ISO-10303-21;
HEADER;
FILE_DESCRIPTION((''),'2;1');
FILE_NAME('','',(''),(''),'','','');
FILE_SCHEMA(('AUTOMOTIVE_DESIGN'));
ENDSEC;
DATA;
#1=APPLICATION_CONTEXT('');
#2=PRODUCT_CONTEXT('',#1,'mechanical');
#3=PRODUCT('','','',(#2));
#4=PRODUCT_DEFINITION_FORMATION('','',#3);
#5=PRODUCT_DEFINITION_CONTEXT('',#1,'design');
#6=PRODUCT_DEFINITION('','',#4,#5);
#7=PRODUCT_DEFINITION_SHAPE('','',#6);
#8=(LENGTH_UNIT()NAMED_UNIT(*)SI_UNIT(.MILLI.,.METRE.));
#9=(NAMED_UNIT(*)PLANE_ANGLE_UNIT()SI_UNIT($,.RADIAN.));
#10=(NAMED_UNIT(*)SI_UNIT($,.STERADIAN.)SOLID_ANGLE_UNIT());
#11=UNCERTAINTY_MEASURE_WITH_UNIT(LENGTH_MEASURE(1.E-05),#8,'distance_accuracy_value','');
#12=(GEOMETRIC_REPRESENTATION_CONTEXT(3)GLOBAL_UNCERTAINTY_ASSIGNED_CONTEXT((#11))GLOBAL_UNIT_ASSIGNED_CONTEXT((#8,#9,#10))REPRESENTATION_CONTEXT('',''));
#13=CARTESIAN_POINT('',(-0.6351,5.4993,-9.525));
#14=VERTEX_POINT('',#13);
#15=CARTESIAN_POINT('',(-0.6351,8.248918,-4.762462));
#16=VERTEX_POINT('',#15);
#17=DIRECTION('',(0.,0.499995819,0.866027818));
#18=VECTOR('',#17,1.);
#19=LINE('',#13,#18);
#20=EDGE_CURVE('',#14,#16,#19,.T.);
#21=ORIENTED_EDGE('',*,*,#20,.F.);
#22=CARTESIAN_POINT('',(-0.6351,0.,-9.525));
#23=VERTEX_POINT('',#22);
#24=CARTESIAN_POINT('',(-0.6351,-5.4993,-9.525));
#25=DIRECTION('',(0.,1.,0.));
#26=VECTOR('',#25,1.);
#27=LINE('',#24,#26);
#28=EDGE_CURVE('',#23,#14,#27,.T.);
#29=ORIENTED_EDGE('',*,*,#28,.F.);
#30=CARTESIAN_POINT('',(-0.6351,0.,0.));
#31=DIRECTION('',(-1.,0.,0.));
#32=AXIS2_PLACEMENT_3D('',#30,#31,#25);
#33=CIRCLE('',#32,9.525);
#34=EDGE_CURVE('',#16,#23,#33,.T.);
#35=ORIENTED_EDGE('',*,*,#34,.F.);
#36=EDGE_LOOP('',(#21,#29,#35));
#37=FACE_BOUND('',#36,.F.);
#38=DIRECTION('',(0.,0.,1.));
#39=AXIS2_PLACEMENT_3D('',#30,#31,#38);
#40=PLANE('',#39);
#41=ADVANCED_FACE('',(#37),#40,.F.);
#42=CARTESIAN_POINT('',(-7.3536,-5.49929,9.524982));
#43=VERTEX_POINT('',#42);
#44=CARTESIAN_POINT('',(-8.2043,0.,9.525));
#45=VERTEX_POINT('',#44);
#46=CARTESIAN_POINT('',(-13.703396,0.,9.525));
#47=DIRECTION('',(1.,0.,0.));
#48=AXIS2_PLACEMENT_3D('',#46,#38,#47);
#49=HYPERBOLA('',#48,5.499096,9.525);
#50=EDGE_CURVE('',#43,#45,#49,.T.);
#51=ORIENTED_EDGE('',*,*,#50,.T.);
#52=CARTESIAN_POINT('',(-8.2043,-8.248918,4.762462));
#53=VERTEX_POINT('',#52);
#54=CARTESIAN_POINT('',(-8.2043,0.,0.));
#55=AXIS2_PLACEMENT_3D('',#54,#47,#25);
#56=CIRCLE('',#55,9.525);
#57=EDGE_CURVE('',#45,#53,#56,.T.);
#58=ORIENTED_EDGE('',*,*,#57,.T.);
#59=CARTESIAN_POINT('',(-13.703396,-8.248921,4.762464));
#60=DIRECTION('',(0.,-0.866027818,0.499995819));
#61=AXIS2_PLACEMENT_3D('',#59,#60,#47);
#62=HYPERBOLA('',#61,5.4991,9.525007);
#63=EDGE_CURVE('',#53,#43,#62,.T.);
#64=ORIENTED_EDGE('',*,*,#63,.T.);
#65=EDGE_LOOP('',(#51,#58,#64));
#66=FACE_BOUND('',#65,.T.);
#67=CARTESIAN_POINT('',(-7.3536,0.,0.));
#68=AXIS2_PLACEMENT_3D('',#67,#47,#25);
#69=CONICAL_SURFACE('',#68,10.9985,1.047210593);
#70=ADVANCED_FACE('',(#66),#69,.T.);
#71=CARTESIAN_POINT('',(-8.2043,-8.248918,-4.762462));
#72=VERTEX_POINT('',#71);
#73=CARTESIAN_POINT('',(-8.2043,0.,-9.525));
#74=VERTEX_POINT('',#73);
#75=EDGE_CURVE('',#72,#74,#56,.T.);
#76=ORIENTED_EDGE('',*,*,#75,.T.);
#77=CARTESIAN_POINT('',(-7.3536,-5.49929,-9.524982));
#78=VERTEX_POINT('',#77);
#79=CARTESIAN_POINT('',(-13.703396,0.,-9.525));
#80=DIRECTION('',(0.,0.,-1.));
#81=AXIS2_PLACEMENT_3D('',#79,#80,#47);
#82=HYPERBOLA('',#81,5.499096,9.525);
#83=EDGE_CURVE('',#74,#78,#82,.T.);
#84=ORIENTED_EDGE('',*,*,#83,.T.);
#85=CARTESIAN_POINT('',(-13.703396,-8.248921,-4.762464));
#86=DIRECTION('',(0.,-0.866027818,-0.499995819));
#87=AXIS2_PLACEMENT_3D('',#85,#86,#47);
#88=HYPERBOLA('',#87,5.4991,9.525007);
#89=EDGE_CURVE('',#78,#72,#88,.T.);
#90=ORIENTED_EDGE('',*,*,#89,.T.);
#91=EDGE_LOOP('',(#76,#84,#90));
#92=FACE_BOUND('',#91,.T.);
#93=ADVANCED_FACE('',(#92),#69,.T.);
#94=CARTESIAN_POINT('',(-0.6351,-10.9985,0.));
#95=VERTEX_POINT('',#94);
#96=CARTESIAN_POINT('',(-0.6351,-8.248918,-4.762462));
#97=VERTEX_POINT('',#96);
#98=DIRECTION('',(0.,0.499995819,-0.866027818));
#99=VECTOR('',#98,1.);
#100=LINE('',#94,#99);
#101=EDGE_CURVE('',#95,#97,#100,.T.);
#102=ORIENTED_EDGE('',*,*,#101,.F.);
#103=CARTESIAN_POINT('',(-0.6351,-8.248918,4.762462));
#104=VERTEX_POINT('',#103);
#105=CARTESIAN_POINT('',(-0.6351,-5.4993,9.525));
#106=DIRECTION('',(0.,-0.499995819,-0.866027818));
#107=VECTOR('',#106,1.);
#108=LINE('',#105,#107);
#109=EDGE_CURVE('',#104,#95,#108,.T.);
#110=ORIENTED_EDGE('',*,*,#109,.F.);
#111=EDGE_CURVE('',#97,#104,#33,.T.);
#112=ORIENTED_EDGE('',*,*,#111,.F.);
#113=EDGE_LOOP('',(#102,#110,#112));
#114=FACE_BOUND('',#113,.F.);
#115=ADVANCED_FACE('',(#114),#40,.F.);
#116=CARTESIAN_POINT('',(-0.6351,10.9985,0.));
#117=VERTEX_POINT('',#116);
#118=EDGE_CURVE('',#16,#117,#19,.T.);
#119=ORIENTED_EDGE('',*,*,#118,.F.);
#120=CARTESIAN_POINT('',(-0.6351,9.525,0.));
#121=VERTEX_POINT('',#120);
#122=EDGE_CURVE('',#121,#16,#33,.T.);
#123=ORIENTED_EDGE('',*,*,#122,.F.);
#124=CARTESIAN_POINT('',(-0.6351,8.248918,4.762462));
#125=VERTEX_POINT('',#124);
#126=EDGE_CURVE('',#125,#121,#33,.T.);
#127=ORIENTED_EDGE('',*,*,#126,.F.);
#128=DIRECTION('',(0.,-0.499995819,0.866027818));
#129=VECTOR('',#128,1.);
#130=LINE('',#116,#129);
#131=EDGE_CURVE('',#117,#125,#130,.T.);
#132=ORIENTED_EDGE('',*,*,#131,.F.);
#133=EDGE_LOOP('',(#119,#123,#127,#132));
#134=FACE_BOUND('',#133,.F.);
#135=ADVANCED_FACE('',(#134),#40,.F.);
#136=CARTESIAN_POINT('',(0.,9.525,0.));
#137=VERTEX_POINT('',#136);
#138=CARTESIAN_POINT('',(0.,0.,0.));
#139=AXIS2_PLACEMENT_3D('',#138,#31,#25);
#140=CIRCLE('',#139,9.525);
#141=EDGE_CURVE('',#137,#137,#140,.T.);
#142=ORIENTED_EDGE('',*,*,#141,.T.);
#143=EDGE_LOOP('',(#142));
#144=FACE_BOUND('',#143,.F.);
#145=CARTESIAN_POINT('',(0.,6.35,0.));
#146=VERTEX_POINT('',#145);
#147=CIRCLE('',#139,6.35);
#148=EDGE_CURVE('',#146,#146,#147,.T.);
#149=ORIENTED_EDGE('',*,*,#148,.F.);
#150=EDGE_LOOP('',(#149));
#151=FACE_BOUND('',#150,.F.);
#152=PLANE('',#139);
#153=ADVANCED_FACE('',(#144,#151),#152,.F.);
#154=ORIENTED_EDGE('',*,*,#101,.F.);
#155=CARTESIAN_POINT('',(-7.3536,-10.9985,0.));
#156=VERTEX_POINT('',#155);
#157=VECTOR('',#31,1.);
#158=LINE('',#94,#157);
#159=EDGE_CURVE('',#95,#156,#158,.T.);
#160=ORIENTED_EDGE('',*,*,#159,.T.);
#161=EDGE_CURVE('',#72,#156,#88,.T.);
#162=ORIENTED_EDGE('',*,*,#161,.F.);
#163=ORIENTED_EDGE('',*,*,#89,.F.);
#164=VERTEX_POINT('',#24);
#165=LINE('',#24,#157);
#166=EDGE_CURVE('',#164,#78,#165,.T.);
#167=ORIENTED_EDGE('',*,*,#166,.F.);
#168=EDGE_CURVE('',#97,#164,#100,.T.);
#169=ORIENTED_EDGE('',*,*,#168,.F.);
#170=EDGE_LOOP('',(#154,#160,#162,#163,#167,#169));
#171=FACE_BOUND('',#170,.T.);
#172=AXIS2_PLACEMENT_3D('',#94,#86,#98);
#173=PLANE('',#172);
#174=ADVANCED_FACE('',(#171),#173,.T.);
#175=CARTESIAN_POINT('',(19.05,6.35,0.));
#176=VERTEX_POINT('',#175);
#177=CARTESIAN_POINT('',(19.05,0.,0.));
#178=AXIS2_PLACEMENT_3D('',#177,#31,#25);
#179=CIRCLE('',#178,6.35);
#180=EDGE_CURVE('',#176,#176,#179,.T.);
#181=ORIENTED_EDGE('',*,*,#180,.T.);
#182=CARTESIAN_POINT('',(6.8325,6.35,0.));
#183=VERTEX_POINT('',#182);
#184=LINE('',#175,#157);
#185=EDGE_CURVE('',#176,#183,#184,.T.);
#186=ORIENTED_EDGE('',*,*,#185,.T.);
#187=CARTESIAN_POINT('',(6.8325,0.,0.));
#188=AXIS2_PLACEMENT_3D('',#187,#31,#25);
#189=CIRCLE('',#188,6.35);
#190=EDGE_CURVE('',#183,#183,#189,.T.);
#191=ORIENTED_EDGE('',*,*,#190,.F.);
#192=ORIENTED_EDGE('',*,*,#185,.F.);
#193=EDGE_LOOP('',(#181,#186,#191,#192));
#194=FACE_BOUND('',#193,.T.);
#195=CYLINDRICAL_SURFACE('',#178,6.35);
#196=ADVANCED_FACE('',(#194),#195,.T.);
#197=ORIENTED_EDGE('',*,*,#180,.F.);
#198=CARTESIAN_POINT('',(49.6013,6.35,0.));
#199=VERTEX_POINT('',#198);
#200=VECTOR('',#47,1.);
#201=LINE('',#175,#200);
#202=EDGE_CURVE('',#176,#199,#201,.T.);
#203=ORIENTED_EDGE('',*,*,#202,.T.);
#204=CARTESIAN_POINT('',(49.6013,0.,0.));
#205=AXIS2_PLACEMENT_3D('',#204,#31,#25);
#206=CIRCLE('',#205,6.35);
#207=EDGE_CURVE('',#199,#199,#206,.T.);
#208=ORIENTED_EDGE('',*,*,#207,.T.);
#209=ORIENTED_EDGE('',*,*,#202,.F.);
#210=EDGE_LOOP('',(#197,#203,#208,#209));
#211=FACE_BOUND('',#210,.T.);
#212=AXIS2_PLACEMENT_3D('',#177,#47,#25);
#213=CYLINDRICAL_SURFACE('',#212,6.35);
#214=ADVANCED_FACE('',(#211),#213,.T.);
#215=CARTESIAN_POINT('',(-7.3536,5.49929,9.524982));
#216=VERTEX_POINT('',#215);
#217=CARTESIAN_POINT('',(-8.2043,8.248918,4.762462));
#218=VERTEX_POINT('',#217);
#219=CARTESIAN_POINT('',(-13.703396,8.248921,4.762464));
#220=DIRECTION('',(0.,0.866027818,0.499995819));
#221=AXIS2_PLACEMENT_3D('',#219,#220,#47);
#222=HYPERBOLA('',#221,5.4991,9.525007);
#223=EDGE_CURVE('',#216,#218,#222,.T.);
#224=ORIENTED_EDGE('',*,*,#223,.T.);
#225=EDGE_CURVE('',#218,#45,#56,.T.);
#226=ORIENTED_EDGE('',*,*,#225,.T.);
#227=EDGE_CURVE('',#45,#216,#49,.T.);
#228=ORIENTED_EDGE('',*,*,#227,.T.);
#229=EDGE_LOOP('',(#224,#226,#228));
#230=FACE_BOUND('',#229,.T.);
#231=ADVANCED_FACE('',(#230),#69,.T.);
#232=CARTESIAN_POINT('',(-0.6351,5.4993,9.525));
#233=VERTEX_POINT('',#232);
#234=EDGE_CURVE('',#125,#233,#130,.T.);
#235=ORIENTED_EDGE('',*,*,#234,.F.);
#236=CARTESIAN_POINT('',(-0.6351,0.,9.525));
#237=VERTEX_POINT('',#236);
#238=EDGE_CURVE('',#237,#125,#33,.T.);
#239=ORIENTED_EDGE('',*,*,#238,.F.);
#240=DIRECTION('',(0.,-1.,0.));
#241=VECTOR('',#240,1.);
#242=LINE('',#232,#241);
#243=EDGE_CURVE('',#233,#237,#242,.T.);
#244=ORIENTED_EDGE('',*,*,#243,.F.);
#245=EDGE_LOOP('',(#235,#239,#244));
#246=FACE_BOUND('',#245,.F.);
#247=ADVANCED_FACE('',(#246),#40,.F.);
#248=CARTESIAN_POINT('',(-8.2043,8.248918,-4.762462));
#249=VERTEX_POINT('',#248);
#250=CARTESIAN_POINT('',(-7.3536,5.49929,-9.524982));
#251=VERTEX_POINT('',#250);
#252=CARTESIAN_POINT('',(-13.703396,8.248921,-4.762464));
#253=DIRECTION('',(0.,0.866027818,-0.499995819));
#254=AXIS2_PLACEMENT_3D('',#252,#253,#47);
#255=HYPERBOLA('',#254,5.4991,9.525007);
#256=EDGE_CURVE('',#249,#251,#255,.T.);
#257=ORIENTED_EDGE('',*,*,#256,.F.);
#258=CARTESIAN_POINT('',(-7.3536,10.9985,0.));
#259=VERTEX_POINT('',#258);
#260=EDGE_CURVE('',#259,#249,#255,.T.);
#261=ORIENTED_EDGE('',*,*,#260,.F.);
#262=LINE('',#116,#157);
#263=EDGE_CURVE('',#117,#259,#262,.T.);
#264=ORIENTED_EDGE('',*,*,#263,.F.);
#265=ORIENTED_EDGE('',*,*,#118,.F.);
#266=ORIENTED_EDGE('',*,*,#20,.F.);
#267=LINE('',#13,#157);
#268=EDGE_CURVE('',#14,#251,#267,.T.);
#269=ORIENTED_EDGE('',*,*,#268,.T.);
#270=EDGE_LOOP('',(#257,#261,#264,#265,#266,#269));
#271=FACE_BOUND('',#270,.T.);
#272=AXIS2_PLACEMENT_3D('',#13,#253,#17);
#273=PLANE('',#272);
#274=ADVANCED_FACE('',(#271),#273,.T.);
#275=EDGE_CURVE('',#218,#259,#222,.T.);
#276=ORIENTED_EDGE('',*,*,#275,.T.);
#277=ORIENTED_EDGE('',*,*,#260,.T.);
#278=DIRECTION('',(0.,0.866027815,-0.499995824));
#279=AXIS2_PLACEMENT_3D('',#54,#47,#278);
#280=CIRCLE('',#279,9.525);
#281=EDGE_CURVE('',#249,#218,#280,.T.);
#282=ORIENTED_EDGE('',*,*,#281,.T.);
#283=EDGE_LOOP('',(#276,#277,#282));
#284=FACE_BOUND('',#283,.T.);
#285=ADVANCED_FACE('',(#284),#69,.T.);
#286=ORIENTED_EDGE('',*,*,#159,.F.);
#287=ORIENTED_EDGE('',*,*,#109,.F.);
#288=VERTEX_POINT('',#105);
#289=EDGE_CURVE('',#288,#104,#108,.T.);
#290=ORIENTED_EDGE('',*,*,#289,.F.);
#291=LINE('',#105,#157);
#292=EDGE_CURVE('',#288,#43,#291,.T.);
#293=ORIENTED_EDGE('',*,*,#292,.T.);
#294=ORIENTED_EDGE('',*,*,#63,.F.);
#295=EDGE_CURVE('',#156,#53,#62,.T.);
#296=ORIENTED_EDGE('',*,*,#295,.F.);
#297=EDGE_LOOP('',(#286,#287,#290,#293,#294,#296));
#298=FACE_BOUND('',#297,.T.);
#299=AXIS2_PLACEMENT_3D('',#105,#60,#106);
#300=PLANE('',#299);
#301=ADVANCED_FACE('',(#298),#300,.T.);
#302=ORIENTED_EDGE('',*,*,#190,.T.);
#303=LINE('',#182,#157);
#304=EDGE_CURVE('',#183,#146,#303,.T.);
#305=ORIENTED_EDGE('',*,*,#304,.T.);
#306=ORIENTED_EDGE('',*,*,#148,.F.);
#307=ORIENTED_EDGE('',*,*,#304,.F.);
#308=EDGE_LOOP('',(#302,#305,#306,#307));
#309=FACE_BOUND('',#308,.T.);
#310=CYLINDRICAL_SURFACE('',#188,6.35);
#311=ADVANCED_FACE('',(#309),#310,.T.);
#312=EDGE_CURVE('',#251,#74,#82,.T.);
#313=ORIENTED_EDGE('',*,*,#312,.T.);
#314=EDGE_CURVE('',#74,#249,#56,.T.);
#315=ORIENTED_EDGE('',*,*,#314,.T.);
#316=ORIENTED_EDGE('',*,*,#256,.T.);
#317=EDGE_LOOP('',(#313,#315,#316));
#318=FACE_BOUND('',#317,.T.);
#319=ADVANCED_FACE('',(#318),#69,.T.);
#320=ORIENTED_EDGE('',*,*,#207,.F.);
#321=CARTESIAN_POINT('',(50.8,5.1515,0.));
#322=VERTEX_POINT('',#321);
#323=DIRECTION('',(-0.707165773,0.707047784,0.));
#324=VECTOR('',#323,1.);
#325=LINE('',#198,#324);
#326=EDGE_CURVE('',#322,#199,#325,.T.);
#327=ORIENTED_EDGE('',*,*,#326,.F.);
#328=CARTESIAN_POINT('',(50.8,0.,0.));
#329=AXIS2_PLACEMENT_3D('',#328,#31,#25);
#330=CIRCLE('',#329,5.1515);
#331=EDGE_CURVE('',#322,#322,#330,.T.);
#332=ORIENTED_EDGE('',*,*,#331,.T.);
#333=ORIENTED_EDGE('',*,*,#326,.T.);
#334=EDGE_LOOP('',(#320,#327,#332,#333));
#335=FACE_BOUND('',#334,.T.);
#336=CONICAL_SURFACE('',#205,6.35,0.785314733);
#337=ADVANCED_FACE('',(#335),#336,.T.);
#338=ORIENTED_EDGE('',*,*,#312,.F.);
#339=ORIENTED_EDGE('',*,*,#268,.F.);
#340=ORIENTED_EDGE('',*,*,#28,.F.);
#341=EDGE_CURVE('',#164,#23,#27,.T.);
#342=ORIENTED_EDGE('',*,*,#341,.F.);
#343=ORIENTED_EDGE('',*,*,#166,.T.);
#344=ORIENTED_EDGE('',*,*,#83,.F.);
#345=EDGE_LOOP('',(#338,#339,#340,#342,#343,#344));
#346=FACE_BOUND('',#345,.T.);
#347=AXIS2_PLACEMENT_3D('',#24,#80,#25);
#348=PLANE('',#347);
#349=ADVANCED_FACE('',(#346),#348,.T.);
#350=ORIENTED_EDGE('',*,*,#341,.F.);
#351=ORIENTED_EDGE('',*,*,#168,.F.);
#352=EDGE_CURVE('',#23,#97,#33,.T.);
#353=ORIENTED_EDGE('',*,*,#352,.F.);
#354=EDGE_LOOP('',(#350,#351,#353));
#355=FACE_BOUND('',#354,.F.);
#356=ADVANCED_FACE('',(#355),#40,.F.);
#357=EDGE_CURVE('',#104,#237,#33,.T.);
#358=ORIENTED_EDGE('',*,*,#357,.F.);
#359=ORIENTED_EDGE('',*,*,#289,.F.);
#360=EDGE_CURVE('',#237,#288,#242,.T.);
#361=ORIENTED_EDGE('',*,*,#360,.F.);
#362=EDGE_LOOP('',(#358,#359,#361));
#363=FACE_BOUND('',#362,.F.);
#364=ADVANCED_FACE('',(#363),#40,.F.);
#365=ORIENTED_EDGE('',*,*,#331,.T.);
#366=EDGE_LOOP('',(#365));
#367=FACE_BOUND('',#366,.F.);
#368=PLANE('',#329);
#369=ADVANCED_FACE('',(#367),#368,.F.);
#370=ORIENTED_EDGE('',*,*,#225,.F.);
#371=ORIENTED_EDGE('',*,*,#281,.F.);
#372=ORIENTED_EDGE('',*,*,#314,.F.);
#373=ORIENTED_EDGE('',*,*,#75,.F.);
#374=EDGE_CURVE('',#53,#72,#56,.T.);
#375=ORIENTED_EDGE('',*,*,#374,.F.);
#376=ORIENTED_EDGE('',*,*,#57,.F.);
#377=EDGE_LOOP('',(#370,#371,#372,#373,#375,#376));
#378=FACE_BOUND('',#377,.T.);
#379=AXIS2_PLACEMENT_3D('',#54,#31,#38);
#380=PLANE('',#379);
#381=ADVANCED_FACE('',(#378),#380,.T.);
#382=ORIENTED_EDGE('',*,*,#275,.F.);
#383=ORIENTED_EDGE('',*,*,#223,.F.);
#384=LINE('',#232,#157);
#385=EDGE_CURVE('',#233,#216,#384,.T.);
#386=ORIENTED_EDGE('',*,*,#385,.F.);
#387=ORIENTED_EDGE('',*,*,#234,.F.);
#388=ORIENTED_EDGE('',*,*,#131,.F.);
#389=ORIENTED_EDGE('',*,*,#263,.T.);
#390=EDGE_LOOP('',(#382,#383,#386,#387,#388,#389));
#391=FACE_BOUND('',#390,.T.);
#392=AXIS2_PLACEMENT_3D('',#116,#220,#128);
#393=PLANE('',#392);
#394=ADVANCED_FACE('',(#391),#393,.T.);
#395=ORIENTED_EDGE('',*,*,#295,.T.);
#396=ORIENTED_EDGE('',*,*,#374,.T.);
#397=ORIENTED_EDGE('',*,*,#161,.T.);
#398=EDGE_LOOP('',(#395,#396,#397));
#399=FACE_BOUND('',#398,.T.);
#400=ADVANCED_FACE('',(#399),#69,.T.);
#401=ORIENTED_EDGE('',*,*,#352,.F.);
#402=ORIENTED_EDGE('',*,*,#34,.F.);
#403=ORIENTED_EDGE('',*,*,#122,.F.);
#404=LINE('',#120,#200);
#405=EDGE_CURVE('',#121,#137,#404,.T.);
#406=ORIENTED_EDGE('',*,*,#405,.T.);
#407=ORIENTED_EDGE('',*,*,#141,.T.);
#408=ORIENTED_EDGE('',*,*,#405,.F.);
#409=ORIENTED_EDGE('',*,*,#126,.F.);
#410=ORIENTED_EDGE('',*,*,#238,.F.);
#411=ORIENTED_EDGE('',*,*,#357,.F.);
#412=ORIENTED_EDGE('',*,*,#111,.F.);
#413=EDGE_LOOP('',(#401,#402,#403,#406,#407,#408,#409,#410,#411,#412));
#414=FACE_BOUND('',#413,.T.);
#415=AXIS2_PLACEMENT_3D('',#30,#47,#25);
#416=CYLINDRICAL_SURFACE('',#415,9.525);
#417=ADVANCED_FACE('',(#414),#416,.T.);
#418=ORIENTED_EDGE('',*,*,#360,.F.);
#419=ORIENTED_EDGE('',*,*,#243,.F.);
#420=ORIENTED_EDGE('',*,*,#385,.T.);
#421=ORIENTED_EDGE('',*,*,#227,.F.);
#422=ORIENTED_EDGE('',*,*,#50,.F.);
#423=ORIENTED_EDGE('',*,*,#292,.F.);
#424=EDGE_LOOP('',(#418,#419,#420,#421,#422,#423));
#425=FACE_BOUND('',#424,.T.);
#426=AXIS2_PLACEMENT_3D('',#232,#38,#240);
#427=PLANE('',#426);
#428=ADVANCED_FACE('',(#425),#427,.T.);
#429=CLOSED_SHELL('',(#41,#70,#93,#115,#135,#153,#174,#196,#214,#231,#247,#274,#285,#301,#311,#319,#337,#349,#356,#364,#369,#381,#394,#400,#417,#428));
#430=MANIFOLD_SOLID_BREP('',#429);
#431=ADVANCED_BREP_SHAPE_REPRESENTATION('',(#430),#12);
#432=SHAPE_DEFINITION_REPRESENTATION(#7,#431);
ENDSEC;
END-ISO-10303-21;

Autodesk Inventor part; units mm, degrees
ref_plane "YZ Plane" through (0, 0, 0) normal (1, 0, 0) x (0, 1, 0)
ref_plane "XZ Plane" through (0, 0, 0) normal (0, 1, 0) x (-1, 0, 0)
sketch "Sketch1" plane through (0, 0, 0) normal (0, 0, 1) x (1, 0, 0)
  line L0 (0, 9.525) -> (0, 6.35)
  line L1 (19.05, 6.35) -> (50.8, 6.35)
  line L2 (50.8, 6.35) -> (50.8, 0)
  line L3 (50.8, 0) -> (-0.6351, 0)
  line L4 (-10.9221, 0) -> (61.087, 0) projected
  line L5 (-0.6351, 0) -> (-0.6351, 9.525)
  line L6 (-0.6351, 9.525) -> (0, 9.525)
  line L7 (19.05, 6.35) -> (6.8325, 6.35)
  line L8 (6.8325, 6.35) -> (0, 6.35)
  line L9 (0, -1.905) -> (0, 11.43) projected
  dimension "d0" = 50.8
  dimension "d1" = 31.75
  dimension "d2" = 12.7
  dimension "d9" = 0.6351
  dimension "d10" = 19.05
  dimension "d13" = 12.2175
  dimension "d14" = 12.7
revolve "Body" add sketch "Sketch1" angle 360 about axis through (50.8, 0, 0) along (-1, 0, 0)
sketch "Sketch2" plane through (-0.6351, 0, 0) normal (-1, 0, 0) x (0, 0, 1)
  line L0 (0, 10.9985) -> (9.525, 5.4993)
  line L1 (9.525, 5.4993) -> (9.525, -5.4993)
  line L2 (9.525, -5.4993) -> (0, -10.9985)
  line L3 (0, -10.9985) -> (-9.525, -5.4993)
  line L4 (-9.525, -5.4993) -> (-9.525, 5.4993)
  line L5 (-9.525, 5.4993) -> (0, 10.9985)
  point P0 (0, 0)
  point P1 (0, 0)
  dimension "d11" = 19.05
extrude "Head" add sketch "Sketch2" along normal blind 7.5692
sketch "Sketch4" plane through (0, 0, 0) normal (0, 0, 1) x (1, 0, 0)
  line L0 (-8.2043, 9.525) -> (-8.2043, 10.9985)
  line L1 (-8.2043, 10.9985) -> (-7.3536, 10.9985)
  line L2 (-7.3536, 10.9985) -> (-8.2043, 9.525)
  line L3 (-9.7181, 0) -> (0.8787, 0) projected
  line L4 (-0.6351, 10.9985) -> (-8.2043, 10.9985) projected
  line L5 (-8.2043, 5.4993) -> (-8.2043, 10.9985) projected
  dimension "d5" = 30
  dimension "d19" = 19.05
revolve "Chamfer1" cut sketch "Sketch4" angle 360 about axis through (-10, 0, 0) along (1, 0, 0)
thread "Thread" size "1/2-13 UNC" class "2A" standard "ANSI Unified Screw Threads" length 31.75
chamfer "Chamfer2" distance 1.1985 distance2 1.1987 1 edges at (50.8, -6.35, 0) measured on face at (50.8, -0.7506, -0.8281)
ref_plane "Work Plane1" through (1.525, 0, 0) normal (0, 0, 1) x (1, 0, 0)
equation "\"d0\" = NLG"
equation "\"d1\" = GEL"
equation "\"d2\" = GD"
equation "\"d10\" = SD2"
equation "\"d14\" = BDM"
equation "\"d11\" = SW"
equation "\"d3\" = KOH - SD"
equation "\"d5\" = ANG1"
equation "\"d19\" = SW0"
equation "\"d15\" = GEL"
equation "\"d6\" = -0.5 * SPD + 0.5 * GD"
equation "\"NLG\" = 50.8"
equation "\"GD\" = 12.7"
equation "\"BDM\" = 12.7"
equation "\"KOH\" = 8.2042"
equation "\"GEL\" = 31.75"
equation "\"SW\" = 19.05"
equation "\"SW0\" = SW"
equation "\"SPD\" = GD1"
equation "\"SD2\" = SW"
equation "\"SD\" = 0.635"
equation "\"ANG1\" = 30deg"
equation "\"GAL\" = 12.2174"
equation "\"GUL\" = 1.19863"
equation "\"RR\" = 0.381"
equation "\"WFT\" = SD"
equation "\"GD1\" = 10.303"
equation "\"THREADDIA\" = 12.7"
equation "\"SDH\" = SW"
equation "\"SDHG\" = 6.8326"
equation "\"TOA\" = 30deg"
equation "\"FAWI\" = 45deg"
equation "\"NND\" = 12.7"
equation "\"E0\" = 22.00275"
properties part number "AS 2465 - 1/2 x 2  UNC" material "Steel, Mild"
